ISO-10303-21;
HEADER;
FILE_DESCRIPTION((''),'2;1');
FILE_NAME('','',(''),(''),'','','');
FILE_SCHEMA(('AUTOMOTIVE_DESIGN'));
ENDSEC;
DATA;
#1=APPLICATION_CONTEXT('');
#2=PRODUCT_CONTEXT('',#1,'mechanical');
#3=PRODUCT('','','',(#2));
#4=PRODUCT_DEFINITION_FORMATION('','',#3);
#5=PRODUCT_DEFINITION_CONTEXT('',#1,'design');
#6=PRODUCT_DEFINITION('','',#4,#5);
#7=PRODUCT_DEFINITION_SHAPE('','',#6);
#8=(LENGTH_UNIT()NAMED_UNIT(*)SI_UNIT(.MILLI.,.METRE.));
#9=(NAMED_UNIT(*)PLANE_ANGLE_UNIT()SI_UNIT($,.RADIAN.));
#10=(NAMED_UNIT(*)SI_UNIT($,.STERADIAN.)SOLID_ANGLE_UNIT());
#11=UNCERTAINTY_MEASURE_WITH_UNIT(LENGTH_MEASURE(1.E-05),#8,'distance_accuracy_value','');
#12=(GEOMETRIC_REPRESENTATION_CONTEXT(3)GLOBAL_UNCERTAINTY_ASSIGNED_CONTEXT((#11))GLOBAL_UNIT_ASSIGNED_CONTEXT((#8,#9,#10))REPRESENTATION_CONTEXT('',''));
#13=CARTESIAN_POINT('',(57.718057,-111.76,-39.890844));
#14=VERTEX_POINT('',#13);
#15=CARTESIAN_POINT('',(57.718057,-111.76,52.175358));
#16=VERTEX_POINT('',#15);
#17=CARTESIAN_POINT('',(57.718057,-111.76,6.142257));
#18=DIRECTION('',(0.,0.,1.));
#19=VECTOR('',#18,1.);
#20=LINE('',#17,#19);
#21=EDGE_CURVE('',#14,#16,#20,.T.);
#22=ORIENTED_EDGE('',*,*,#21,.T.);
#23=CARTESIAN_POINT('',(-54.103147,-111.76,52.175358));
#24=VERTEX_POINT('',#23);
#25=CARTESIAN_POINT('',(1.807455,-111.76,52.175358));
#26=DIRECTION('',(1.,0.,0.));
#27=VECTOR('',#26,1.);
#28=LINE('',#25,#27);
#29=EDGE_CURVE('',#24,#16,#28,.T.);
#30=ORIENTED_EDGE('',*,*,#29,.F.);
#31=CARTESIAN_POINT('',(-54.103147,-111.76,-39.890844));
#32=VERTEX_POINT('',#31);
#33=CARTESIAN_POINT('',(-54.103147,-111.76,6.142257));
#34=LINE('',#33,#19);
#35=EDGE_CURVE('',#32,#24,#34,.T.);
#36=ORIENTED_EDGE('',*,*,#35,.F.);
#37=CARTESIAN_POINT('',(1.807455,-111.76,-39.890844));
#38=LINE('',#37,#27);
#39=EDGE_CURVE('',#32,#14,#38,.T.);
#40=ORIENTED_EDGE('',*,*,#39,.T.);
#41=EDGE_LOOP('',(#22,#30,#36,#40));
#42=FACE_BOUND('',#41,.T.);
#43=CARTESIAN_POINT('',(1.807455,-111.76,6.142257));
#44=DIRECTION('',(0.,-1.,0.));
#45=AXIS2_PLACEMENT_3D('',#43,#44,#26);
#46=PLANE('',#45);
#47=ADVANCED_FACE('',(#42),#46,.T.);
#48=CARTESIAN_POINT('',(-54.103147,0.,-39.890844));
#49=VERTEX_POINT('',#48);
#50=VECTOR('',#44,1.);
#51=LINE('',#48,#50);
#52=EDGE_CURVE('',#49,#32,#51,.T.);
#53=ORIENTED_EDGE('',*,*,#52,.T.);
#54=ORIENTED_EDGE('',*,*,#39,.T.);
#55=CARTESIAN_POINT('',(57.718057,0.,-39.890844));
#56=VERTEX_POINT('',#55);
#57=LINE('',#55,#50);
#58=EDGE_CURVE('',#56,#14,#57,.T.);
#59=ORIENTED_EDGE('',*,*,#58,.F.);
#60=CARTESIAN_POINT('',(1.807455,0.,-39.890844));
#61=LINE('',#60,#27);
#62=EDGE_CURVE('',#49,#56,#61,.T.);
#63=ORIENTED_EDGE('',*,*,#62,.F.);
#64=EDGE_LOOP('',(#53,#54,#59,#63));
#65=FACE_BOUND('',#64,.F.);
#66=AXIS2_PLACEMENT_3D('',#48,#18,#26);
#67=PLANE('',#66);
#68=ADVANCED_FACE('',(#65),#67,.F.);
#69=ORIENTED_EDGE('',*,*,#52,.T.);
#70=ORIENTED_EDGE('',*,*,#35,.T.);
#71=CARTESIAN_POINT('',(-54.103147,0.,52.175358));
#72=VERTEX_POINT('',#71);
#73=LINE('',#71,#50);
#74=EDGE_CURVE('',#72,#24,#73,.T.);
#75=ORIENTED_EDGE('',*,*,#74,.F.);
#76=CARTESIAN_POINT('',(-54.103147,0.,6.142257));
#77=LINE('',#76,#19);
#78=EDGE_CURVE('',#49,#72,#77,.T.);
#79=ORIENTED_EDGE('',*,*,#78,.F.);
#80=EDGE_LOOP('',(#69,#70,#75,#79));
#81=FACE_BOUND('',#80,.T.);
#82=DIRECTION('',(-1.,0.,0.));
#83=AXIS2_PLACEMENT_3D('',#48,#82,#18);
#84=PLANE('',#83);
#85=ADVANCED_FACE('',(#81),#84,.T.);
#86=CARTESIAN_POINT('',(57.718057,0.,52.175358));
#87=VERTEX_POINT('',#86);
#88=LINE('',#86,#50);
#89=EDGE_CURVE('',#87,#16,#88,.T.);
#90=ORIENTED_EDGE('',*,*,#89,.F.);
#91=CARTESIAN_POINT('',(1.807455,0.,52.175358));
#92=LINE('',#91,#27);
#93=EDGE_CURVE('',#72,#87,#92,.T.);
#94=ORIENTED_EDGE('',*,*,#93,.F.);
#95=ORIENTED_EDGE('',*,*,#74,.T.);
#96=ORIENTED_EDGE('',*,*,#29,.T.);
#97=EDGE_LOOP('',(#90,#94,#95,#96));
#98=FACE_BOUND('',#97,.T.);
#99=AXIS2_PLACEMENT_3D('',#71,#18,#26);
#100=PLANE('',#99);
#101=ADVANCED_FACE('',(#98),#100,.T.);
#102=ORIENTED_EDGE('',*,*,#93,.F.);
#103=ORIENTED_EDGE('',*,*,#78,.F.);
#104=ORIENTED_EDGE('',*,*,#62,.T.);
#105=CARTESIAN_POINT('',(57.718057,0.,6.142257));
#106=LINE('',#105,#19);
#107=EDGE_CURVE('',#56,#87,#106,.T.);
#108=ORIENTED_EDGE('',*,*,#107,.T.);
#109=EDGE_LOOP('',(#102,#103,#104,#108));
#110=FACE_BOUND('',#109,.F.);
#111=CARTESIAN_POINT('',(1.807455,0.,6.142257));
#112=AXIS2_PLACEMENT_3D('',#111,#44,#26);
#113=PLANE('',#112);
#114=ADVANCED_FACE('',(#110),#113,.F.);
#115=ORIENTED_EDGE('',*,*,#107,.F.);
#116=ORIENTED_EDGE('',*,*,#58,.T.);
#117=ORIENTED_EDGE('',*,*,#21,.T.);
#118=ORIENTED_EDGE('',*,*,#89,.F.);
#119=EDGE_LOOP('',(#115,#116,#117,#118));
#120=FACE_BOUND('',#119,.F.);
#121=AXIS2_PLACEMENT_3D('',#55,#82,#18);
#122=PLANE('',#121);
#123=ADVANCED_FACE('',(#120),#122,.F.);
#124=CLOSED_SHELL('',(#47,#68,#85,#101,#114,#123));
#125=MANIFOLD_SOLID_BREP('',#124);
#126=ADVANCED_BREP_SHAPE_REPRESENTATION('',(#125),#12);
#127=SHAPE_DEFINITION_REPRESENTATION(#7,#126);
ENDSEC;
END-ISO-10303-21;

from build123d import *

# Parameters (mm, degrees)
F0_W     = 111.8212044239
F0_H     = 92.0662023127
F1_DEPTH = 111.76
F3_DEPTH = 240


# Not quite as in the source:
# - an extrude ends at something that could not be found from the text; its depth is read off the source's solid


with BuildPart() as f1:
    # F0 (on Front) → F1 (new body)
    with BuildSketch(Plane.XZ):
        with Locations((1.8074549735, 6.1422567815)):
            Rectangle(F0_W, F0_H)
    extrude(amount=F1_DEPTH)

    # F2 (on face) → F3 (cut, through all)
    with BuildSketch(Plane(origin=(0, 0, 0), x_dir=(-1, 0, 0), z_dir=(0, 1, 0))):
        with BuildLine():
            ThreePointArc((-3.9819494155, 18.9731204628), (-12.2196415277, -15.0504346175), (19.3864700562, 0))
            ThreePointArc((19.3864700562, 0), (17.5745341676, 8.1835792924), (12.4774278386, 14.8374194446))
            ThreePointArc((12.4774278386, 14.8374194446), (13.0904581477, 12.8344345243), (13.297498461, 10.7499947771))
            ThreePointArc((13.297498461, 10.7499947771), (-1.8522784042, 1.1818299197), (-3.9819494155, 18.9731204628))
        make_face()
    extrude(amount=F3_DEPTH, mode=Mode.SUBTRACT)


solid = f1.part
